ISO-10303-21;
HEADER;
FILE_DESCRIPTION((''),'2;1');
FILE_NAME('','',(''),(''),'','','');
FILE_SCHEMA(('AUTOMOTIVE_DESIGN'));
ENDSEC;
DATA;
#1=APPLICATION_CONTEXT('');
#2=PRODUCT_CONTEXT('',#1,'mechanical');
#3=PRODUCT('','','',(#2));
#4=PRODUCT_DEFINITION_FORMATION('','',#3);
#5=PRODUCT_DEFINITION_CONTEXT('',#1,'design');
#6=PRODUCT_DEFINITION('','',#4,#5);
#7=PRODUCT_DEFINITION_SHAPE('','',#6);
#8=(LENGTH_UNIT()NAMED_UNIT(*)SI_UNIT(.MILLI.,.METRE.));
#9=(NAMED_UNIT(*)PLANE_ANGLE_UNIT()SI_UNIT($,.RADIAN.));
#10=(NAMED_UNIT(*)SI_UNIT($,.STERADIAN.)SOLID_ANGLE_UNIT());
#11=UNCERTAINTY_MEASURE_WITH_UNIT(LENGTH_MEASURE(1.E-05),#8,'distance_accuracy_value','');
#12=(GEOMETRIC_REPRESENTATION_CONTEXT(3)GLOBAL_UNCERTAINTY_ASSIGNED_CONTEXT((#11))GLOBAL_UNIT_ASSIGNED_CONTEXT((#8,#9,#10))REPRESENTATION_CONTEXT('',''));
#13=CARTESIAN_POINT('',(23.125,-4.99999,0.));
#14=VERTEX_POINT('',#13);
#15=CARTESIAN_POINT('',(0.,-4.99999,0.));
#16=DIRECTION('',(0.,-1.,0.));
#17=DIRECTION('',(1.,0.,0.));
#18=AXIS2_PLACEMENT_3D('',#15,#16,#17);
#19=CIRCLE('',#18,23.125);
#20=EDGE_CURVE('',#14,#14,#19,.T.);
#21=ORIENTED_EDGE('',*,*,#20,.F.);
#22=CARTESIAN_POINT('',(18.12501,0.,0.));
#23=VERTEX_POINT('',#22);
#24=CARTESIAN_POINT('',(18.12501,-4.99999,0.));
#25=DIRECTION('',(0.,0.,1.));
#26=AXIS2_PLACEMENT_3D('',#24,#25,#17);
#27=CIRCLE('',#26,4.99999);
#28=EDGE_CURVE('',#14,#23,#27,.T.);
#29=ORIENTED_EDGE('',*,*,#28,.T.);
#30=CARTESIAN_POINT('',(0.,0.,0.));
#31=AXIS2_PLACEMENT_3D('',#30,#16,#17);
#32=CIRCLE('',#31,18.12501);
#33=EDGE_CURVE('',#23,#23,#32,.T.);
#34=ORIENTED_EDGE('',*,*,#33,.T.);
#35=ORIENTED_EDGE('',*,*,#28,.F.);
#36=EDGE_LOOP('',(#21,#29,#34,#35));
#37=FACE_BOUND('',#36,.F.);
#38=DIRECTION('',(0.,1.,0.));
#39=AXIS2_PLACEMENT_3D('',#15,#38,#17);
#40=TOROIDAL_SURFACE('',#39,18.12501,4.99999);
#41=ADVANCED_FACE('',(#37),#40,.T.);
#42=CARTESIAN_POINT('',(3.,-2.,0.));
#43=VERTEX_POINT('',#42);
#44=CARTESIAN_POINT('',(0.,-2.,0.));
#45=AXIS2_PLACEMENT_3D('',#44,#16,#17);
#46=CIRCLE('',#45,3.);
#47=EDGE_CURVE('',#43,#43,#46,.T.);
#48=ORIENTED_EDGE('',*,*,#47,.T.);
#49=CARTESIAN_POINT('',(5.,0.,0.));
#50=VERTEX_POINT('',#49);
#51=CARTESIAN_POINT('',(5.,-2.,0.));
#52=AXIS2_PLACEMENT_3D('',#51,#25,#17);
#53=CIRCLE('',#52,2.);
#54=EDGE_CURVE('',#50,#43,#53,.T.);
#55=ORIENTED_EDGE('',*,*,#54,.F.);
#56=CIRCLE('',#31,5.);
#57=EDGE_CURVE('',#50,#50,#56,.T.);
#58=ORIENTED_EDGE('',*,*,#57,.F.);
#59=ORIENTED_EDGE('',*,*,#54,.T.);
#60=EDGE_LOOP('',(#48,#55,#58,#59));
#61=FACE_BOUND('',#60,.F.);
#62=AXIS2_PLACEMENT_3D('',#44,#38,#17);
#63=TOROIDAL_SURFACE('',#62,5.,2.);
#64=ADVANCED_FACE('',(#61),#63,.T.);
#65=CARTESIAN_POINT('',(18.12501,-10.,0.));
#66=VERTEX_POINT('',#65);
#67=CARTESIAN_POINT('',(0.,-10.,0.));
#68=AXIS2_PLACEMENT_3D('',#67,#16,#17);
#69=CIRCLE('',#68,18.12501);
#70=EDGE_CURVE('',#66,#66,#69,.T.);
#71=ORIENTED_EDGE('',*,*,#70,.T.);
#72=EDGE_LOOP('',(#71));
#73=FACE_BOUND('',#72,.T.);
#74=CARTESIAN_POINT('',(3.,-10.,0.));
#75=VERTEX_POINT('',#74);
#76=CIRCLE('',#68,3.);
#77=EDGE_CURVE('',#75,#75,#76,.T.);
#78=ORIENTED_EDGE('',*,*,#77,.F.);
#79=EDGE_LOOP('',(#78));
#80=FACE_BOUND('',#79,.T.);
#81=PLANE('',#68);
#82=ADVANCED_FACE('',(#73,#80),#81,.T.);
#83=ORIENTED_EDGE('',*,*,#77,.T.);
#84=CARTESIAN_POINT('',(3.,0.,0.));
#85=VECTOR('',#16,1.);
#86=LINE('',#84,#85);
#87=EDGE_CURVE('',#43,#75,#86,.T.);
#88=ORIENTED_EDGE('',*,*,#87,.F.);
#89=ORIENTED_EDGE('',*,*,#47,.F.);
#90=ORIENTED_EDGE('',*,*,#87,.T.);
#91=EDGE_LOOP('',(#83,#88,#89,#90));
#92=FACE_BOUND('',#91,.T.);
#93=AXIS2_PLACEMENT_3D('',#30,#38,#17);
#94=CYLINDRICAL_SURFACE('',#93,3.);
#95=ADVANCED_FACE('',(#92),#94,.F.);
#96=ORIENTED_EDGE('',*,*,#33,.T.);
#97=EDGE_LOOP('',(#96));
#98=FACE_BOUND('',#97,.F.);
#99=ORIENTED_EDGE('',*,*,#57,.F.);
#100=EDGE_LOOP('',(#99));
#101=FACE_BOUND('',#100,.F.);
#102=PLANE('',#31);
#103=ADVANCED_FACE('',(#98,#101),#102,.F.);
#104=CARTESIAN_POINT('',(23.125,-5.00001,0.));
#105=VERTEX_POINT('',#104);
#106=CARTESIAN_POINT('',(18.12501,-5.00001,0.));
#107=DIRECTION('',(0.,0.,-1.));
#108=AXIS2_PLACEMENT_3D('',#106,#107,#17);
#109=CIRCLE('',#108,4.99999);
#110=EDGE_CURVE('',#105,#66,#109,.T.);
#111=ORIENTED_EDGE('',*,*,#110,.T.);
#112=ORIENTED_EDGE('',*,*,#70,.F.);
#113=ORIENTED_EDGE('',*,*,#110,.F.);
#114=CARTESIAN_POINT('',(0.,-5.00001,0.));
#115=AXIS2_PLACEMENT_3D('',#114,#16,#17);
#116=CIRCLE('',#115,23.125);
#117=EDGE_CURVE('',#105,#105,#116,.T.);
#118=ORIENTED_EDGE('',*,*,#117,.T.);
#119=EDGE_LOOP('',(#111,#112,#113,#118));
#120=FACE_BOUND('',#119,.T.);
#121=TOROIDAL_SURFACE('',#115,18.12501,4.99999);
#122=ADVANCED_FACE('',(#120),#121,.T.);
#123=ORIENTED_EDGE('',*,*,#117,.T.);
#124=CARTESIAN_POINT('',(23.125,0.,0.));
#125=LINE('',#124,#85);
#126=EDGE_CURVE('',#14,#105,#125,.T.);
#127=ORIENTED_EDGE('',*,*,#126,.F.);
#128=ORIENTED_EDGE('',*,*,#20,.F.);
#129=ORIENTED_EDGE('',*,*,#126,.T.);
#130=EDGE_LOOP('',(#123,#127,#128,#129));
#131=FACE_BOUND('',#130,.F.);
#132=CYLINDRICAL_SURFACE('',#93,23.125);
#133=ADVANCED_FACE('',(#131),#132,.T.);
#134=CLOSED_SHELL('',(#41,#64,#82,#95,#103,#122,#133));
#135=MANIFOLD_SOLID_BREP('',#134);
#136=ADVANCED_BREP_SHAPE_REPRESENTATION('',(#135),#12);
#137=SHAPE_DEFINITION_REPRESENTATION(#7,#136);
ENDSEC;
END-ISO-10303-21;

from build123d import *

# Parameters (mm, degrees)
F0_R     = 23.125
F0_R_2   = 3
F1_DEPTH = 10
F2_R     = 4.99999
F3_R     = 2


# Not quite as in the source:
# - a fillet or chamfer is up to 0.001 mm smaller than in the source, because OpenCascade refuses the exact size


with BuildPart() as f1:
    # F0 (on Front) → F1 (new body)
    with BuildSketch(Plane.XZ):
        Circle(F0_R)
        Circle(F0_R_2, mode=Mode.SUBTRACT)
    extrude(amount=F1_DEPTH)

    # F2 (radius 5 in the source; OpenCascade refuses exactly that, so slightly less here)
    f2_edges = [f1.edges().sort_by_distance(p)[0] for p in [
        (-23.125, 0, 0),
        (-23.125, -10, 0),
    ]]
    fillet(f2_edges, radius=F2_R)

    # F3
    f3_edges = [f1.edges().sort_by_distance(p)[0] for p in [
        (-3, 0, 0),
        (-18.12501, 0, 0),
    ]]
    fillet(f3_edges, radius=F3_R)


solid = f1.part
